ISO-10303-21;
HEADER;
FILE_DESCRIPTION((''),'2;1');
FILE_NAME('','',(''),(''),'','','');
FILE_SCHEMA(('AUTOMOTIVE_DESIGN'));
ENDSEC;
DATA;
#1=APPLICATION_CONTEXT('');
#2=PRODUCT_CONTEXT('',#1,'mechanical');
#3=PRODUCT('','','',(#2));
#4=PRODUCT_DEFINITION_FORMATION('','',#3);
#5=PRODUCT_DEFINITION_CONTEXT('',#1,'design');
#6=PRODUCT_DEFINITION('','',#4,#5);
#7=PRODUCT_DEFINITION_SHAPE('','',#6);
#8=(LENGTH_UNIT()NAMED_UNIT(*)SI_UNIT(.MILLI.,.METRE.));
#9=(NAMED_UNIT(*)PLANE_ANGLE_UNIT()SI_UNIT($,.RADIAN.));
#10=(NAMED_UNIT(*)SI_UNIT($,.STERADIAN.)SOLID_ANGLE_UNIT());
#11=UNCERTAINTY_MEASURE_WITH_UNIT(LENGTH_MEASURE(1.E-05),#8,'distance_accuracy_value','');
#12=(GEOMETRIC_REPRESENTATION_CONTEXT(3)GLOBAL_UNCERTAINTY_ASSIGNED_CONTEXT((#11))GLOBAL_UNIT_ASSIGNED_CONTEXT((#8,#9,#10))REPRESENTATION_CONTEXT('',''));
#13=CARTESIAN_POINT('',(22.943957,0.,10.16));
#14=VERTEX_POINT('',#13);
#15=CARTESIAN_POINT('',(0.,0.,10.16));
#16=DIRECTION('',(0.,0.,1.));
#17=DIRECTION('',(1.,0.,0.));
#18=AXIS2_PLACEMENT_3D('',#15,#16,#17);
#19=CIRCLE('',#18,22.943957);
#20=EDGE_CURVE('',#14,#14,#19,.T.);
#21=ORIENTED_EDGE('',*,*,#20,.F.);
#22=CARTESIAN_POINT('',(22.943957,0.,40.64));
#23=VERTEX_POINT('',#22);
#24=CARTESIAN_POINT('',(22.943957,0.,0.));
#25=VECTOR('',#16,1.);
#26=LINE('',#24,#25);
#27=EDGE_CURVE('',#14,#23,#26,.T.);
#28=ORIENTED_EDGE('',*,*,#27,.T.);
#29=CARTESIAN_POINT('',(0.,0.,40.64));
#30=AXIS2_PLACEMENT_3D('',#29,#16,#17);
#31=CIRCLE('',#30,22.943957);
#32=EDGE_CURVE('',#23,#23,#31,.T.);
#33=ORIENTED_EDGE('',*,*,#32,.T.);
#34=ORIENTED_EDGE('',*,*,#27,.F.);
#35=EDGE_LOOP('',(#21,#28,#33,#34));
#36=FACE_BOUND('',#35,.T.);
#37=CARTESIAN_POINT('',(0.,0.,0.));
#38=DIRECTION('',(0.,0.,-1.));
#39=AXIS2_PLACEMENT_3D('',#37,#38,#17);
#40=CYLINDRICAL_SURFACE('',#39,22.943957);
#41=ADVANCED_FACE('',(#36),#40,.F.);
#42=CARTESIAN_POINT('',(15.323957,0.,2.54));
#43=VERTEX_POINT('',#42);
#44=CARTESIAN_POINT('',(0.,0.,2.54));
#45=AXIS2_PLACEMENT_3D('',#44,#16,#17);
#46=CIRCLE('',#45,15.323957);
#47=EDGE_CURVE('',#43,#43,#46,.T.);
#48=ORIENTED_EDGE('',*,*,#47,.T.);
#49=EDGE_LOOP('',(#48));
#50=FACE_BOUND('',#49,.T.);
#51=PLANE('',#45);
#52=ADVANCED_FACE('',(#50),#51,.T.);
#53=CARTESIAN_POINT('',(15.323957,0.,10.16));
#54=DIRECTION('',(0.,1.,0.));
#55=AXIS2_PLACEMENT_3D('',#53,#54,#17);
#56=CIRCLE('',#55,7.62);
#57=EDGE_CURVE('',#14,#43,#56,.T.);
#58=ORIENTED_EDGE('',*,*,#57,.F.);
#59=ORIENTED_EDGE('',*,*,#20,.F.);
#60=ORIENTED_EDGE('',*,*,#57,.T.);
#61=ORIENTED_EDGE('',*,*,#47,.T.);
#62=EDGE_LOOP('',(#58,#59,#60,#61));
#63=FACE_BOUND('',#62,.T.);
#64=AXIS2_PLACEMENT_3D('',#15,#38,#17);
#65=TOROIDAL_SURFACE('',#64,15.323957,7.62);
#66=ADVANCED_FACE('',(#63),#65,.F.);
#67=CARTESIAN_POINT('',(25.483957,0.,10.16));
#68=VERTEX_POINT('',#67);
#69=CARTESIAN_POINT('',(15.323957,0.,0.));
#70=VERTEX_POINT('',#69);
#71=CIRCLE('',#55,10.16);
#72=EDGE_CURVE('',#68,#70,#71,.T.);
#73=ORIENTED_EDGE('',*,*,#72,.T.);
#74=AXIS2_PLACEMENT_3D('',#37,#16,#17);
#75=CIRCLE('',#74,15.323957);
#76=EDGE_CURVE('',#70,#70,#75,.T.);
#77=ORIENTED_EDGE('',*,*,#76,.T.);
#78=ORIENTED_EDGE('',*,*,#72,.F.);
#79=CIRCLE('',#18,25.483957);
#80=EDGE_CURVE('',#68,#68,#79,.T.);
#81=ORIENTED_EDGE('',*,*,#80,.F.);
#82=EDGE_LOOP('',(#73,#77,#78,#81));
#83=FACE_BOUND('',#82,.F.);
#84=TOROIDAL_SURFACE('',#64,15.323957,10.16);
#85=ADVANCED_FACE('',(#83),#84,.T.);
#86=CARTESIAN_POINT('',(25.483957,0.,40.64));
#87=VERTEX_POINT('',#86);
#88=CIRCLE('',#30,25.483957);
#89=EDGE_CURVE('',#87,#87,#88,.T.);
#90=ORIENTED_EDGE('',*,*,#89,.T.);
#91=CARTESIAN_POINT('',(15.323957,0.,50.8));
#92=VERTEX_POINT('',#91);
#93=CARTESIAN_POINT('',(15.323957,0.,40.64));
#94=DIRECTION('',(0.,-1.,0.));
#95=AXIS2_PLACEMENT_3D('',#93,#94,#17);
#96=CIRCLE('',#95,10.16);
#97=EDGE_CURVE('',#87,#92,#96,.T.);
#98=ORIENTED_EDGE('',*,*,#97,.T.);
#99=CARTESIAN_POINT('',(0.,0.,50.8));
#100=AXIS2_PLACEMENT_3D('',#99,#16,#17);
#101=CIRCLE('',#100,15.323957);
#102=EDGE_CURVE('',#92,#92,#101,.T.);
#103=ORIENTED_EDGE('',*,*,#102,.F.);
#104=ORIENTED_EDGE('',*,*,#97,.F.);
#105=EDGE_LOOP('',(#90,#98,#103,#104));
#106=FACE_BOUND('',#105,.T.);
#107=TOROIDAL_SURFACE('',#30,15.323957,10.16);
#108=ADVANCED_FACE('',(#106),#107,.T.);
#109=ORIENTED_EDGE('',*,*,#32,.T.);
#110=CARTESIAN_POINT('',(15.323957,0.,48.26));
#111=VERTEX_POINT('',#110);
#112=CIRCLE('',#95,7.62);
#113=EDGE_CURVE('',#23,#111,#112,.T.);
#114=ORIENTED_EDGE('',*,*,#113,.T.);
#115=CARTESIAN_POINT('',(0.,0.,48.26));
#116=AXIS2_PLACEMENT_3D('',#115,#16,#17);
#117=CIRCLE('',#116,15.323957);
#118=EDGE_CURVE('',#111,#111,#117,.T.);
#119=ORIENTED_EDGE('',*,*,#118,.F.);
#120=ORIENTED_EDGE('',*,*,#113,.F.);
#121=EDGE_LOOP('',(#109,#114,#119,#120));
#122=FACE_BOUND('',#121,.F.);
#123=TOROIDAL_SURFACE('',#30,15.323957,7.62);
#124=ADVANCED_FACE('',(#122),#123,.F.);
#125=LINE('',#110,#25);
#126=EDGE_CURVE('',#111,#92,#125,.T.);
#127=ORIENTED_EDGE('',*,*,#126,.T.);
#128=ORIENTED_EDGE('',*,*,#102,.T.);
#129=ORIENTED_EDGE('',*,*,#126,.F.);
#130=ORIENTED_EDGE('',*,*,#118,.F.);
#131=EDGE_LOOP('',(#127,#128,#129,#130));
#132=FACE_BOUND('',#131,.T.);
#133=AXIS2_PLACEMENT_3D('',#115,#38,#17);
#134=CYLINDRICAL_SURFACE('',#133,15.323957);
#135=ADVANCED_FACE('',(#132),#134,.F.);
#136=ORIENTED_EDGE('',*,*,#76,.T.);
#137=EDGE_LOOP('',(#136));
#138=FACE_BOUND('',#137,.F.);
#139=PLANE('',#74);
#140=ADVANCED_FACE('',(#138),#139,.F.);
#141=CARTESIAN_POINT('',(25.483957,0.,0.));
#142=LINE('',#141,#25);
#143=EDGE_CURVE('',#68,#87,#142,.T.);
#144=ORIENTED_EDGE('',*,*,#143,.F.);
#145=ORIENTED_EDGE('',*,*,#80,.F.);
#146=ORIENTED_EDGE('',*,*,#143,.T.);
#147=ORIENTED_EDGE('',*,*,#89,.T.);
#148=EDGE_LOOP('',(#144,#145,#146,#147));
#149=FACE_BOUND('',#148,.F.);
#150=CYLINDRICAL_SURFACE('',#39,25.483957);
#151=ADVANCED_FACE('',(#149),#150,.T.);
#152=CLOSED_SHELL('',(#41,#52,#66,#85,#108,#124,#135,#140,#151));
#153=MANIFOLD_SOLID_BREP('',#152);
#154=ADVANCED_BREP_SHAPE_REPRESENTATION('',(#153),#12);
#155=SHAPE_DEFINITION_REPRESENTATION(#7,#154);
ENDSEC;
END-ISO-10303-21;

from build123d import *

# Parameters (mm, degrees)
F0_R     = 25.4839572759
F1_DEPTH = 50.8
F2_R     = 10.16
F3_R     = 10.16
F4_T     = -2.54


# Not quite as in the source:
# - a shell that OpenCascade refuses in one call is made with other operations: the cavity is built on its own and cut out


with BuildPart() as f1:
    # F0 (on Top) → F1 (new body)
    with BuildSketch(Plane.XY):
        Circle(F0_R)
    extrude(amount=F1_DEPTH)

    # F2
    f2_edges = [f1.edges().sort_by_distance(p)[0] for p in [
        (-25.483957, 0, 0),
    ]]
    fillet(f2_edges, radius=F2_R)

    # F3
    f3_edges = [f1.edges().sort_by_distance(p)[0] for p in [
        (-25.483957, 0, 50.8),
    ]]
    fillet(f3_edges, radius=F3_R)

    # F4: a shell. OpenCascade refuses it in one call, so the cavity is built on its own and cut out:
    # the body offset inwards by the wall thickness, plus a prism from it out through each open face.
    f4_core = offset(f1.part, amount=F4_T, mode=Mode.PRIVATE)
    f4_exits = [f4_core.faces().sort_by_distance(p)[0] for p in [
        (0, 0, 48.26),
    ]]
    add(f4_core, mode=Mode.SUBTRACT)
    extrude(f4_exits, amount=-F4_T, mode=Mode.SUBTRACT)


solid = f1.part
